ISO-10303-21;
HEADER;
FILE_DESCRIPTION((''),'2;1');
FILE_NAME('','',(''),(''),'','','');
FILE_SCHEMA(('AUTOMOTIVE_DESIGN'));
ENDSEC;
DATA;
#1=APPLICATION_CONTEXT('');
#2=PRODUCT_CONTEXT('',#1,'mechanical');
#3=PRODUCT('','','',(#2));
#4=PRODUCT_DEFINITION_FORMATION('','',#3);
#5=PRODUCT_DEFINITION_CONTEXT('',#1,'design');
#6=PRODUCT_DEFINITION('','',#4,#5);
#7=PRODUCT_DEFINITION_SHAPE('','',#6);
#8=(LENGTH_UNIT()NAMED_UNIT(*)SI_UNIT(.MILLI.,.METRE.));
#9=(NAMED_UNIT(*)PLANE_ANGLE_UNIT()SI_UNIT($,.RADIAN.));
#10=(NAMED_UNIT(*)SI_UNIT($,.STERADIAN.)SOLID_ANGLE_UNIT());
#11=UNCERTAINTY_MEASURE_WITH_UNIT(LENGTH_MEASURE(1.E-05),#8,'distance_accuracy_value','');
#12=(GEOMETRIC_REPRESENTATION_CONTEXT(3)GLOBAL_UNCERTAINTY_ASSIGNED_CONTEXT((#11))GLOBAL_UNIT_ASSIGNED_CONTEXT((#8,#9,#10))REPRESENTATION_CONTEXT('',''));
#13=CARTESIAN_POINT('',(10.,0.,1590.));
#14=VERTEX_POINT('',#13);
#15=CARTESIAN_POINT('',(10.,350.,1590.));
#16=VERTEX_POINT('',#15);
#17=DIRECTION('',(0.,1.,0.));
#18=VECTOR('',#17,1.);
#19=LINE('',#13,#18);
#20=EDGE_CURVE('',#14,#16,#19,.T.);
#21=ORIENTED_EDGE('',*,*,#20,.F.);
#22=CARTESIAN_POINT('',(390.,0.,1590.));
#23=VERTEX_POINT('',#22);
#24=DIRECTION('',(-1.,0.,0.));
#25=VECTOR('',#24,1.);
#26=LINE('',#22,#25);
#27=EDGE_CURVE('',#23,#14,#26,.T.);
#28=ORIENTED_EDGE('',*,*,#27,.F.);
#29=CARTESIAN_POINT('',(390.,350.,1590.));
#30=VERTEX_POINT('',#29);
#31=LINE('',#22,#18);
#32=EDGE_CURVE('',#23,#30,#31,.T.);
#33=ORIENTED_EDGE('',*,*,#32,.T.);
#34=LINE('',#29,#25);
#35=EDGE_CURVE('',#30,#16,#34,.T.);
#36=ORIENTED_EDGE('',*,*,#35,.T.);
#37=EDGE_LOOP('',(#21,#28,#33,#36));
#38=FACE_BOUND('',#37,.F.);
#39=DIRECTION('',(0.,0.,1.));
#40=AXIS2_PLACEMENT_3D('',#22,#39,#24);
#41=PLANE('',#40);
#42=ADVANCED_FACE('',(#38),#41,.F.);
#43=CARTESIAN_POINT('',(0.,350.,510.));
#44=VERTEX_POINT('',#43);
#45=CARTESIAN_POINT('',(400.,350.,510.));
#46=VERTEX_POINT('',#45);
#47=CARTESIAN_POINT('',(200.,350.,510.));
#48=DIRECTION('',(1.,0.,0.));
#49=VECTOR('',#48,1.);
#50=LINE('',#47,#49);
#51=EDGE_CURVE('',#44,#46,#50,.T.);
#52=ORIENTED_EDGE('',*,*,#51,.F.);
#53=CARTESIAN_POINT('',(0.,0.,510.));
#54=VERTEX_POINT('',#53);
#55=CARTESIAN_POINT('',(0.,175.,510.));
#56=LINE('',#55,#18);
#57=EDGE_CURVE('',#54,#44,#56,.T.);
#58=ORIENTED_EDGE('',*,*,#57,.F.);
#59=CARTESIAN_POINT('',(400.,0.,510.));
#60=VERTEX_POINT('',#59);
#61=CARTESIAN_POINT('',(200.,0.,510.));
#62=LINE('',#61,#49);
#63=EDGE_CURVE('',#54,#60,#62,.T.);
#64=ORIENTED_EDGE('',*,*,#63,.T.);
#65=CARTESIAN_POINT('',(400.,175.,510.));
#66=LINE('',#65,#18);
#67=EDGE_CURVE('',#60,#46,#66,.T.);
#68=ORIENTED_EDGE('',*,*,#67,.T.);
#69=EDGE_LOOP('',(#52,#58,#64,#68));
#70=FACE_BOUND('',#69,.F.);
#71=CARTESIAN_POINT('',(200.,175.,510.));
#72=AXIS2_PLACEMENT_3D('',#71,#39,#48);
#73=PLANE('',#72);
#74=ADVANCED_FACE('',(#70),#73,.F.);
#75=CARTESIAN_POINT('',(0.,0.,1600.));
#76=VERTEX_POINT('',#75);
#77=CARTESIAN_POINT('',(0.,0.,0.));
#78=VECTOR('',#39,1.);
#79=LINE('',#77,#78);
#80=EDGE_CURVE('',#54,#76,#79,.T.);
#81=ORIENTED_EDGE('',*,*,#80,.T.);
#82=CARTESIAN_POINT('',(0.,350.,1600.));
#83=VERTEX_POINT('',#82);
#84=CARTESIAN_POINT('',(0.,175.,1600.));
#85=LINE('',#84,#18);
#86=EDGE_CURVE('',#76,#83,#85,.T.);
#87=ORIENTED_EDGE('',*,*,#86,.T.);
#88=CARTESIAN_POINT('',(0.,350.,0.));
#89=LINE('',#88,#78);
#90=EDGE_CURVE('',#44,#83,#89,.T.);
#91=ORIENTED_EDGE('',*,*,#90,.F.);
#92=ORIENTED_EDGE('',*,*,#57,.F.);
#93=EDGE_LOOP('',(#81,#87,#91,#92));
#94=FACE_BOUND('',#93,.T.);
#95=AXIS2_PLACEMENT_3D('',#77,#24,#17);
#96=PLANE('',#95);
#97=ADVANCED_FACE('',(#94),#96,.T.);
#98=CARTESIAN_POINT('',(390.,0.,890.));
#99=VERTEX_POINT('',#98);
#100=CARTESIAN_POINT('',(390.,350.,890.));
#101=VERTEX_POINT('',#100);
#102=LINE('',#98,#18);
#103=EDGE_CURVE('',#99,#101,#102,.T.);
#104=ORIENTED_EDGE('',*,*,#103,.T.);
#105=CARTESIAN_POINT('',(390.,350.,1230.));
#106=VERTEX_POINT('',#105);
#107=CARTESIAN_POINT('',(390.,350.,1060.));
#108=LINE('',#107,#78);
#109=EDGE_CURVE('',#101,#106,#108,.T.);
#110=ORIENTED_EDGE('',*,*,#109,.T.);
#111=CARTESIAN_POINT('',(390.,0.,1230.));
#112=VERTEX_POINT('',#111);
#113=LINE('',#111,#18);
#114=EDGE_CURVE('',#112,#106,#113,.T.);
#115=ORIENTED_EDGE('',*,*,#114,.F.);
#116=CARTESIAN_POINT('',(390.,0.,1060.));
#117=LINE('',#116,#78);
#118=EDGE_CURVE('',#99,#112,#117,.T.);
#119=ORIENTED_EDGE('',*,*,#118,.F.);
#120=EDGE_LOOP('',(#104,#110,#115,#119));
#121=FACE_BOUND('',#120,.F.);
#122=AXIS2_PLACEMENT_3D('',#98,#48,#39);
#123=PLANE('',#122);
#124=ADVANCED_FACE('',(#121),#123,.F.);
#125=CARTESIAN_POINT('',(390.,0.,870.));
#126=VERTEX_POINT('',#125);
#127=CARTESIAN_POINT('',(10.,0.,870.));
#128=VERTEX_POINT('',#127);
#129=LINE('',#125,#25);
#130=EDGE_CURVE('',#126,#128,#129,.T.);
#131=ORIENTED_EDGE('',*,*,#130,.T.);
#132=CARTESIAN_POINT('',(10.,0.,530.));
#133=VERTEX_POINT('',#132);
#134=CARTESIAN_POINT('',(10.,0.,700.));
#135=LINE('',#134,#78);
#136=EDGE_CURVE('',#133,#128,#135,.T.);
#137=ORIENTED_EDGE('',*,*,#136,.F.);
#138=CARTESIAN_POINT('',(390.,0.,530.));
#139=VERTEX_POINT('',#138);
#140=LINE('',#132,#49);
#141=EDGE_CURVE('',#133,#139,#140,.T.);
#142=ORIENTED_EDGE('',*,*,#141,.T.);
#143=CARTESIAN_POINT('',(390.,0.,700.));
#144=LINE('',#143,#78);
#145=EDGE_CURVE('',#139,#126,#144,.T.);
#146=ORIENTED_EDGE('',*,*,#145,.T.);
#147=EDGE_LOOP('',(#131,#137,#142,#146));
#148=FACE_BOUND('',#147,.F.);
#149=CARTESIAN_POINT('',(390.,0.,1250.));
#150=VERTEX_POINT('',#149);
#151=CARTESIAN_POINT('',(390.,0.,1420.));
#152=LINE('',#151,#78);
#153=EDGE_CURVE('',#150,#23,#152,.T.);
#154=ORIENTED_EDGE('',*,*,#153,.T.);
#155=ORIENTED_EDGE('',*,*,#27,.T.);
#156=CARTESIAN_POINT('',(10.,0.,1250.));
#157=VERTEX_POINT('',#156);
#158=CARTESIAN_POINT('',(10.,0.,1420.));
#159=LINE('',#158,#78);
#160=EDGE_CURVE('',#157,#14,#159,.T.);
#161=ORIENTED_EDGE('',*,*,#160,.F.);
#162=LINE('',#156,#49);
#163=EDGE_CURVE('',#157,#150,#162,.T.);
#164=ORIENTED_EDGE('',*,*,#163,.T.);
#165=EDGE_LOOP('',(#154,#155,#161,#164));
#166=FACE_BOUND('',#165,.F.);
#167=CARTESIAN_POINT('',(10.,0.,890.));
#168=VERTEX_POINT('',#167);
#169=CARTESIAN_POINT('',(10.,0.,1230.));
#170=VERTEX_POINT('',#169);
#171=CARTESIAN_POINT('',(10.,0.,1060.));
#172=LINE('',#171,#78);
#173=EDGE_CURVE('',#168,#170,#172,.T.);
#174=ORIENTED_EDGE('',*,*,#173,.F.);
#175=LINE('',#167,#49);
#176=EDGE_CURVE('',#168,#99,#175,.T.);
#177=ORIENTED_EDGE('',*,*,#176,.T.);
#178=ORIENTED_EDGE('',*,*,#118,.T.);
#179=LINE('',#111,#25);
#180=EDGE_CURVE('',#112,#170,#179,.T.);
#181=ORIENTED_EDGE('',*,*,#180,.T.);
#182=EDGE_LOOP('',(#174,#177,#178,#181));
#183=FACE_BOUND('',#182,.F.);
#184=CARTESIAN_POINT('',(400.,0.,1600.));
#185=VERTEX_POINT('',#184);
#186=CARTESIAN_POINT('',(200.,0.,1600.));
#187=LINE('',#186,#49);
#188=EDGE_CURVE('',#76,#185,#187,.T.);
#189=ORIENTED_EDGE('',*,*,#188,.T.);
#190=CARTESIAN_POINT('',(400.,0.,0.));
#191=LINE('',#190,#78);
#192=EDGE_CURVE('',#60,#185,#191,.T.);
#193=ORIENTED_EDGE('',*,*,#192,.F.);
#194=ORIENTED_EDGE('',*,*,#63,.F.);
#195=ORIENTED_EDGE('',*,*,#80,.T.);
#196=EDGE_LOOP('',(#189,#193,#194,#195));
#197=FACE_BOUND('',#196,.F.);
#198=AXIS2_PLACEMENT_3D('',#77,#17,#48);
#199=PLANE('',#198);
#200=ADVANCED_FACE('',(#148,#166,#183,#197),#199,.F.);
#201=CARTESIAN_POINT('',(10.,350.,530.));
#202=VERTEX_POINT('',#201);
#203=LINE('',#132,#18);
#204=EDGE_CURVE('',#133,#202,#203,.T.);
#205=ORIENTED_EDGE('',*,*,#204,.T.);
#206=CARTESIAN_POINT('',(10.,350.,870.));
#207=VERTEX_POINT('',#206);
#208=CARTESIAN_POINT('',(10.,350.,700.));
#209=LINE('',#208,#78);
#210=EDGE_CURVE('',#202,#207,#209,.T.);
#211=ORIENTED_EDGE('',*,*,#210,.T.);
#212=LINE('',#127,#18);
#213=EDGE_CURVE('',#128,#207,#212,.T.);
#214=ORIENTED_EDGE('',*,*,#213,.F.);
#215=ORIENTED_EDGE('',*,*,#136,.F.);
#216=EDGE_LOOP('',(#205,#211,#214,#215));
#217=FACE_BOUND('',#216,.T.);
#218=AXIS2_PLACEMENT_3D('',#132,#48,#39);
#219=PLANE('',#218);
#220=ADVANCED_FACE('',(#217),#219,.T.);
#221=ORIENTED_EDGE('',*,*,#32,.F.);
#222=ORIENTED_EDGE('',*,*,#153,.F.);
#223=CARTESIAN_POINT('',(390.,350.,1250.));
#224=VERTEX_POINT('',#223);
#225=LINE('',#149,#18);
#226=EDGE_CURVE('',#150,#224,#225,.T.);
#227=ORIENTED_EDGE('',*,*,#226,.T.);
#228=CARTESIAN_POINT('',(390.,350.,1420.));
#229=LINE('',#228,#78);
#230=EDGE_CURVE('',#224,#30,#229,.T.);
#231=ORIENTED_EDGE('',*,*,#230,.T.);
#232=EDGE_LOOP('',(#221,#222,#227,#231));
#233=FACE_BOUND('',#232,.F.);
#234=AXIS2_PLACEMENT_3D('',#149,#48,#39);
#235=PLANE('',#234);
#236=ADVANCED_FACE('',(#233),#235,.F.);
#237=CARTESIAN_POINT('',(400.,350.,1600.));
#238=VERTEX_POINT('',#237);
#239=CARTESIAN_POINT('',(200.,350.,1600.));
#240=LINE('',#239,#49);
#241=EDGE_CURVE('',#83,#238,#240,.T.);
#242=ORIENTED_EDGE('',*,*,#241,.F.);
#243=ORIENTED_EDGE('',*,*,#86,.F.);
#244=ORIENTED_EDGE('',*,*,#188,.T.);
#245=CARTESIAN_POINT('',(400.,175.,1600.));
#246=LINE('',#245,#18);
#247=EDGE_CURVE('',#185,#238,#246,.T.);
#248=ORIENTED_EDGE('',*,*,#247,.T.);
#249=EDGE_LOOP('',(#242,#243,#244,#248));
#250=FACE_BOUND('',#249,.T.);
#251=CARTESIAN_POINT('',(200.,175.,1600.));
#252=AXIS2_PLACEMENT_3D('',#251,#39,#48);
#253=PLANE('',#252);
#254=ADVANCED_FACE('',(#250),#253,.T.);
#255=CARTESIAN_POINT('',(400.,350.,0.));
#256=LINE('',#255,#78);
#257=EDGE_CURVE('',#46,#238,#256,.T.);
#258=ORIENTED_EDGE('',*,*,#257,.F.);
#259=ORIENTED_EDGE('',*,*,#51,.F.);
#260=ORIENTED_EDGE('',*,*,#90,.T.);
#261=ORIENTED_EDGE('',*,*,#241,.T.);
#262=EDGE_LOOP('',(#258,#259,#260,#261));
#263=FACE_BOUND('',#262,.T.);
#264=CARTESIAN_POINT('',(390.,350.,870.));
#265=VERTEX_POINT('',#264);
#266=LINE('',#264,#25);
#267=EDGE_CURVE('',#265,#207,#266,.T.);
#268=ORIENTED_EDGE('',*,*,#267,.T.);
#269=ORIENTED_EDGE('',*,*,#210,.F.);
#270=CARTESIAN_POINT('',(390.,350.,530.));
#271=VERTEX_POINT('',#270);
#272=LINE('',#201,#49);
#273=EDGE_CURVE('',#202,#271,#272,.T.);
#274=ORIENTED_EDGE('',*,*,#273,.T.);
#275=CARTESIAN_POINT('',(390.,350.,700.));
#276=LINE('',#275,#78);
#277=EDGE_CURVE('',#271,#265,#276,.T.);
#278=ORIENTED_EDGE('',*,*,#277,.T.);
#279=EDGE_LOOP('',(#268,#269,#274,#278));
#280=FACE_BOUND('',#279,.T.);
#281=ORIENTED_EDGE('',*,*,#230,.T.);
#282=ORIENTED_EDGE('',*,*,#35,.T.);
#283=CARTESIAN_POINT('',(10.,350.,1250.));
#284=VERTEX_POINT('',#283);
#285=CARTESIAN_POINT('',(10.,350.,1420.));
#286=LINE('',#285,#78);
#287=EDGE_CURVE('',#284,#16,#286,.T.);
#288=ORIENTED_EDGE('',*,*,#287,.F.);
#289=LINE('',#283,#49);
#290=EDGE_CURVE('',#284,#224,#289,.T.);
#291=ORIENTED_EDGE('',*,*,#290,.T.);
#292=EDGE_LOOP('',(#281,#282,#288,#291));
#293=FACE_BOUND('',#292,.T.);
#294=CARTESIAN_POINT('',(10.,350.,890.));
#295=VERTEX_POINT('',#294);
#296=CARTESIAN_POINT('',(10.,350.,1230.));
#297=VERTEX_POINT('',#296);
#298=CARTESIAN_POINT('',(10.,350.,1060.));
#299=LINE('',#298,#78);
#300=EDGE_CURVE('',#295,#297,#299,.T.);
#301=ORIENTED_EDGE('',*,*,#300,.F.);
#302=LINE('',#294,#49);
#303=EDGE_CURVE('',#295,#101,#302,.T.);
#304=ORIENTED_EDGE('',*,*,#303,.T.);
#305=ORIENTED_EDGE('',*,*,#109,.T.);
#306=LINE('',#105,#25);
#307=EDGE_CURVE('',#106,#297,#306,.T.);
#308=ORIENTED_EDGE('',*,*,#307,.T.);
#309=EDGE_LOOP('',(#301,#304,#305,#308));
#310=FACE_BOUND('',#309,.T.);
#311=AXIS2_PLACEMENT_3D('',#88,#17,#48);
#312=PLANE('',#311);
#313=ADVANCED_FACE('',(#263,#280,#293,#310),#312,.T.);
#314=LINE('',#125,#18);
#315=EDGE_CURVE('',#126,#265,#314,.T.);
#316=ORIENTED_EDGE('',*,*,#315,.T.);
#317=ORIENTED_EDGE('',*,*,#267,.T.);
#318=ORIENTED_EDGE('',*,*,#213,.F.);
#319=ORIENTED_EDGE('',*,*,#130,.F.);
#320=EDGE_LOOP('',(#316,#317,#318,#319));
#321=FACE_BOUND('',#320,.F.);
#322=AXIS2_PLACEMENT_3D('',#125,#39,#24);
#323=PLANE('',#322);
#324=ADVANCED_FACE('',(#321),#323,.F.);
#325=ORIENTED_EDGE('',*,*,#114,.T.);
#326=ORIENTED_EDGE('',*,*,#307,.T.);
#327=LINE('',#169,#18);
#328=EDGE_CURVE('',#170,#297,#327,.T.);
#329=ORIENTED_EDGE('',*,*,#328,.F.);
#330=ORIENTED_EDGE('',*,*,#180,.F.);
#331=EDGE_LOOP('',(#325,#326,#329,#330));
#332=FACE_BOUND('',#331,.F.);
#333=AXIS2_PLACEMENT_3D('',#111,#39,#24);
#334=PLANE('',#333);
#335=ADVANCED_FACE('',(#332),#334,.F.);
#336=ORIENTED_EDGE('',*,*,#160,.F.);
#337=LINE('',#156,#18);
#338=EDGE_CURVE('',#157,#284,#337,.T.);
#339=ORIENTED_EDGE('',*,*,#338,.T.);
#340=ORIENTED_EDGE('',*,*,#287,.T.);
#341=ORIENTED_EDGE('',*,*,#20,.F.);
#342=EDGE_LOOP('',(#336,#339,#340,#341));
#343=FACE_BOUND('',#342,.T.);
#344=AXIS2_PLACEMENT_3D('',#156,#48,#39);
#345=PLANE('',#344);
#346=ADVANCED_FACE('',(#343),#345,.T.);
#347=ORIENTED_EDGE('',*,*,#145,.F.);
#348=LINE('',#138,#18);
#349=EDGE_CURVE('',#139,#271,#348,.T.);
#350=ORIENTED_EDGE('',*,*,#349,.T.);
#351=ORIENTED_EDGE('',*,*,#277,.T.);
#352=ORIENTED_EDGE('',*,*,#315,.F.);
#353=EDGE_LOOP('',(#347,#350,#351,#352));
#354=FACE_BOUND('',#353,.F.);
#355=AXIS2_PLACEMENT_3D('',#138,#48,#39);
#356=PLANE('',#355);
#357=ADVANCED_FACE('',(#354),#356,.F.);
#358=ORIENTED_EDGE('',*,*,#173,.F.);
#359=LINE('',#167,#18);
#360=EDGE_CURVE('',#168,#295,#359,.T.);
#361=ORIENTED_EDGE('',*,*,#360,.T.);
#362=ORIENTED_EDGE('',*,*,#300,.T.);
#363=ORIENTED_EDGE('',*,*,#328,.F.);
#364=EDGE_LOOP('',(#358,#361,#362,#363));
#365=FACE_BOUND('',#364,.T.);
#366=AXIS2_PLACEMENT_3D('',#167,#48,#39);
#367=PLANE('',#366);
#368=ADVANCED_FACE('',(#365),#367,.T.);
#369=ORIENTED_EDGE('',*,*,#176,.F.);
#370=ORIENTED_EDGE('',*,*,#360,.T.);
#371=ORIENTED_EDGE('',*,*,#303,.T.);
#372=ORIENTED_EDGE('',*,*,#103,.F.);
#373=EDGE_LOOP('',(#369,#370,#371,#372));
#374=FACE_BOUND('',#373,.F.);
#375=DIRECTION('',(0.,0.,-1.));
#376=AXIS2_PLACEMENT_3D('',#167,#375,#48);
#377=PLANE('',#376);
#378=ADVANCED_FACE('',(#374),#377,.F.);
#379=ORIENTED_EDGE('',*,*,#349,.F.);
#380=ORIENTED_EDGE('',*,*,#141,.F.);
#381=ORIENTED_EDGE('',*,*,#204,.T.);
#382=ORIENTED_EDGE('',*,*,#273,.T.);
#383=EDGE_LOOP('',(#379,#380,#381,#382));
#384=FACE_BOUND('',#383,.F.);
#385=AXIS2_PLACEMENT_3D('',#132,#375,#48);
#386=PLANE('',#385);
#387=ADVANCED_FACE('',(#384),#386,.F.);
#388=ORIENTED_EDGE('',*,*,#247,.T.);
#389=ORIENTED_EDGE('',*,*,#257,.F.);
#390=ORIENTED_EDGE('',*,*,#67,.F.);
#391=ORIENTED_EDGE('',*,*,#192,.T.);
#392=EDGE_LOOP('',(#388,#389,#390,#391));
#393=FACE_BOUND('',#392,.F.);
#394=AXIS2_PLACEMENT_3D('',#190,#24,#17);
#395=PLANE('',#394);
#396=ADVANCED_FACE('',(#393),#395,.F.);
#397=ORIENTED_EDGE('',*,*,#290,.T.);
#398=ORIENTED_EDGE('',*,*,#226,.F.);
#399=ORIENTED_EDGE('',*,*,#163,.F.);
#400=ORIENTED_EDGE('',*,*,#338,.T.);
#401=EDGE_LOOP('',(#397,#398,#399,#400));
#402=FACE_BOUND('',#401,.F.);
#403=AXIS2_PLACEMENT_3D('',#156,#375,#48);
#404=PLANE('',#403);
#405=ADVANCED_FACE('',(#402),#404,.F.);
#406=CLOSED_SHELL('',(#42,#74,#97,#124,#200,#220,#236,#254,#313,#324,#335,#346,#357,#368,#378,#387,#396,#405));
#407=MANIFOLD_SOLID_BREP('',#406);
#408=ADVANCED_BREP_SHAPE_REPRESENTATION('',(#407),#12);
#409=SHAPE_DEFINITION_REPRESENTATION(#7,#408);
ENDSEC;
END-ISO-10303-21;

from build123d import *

# Parameters (mm, degrees)
F0_W     = 400
F0_H     = 350
F1_DEPTH = 1600
F2_W     = 190
F2_H     = 340
F3_DEPTH = 350
F4_DEPTH = 500
F5_DEPTH = 10


# Not quite as in the source:
# - a feature names something its author has since deleted; it is built from what else it names


with BuildPart() as f1:
    # F0 (on Top) → F1 (new body)
    with BuildSketch(Plane.XY):
        with Locations((200, 175)):
            Rectangle(F0_W, F0_H)
    extrude(amount=F1_DEPTH)

    # F2 (on face) → F3 (cut)
    with BuildSketch(Plane.XZ):
        with Locations((295, 1420)):
            Rectangle(F2_W, F2_H)
        with Locations((105, 1420)):
            Rectangle(F2_W, F2_H)
        with Locations((105, 1060)):
            Rectangle(F2_W, F2_H)
        with Locations((295, 1060)):
            Rectangle(F2_W, F2_H)
        with Locations((295, 700)):
            Rectangle(F2_W, F2_H)
        with Locations((105, 700)):
            Rectangle(F2_W, F2_H)
    extrude(amount=-F3_DEPTH, mode=Mode.SUBTRACT)

    # F4 (cut): a face of the model
    f4_faces = [f1.faces().sort_by_distance(p)[0] for p in [
        (200, 175, 0),
    ]]
    extrude(f4_faces, amount=-F4_DEPTH, mode=Mode.SUBTRACT)

    # F5 (cut): a face of the model
    f5_faces = [f1.faces().sort_by_distance(p)[0] for p in [
        (200, 175, 500),
    ]]
    extrude(f5_faces, amount=-F5_DEPTH, mode=Mode.SUBTRACT)


solid = f1.part
